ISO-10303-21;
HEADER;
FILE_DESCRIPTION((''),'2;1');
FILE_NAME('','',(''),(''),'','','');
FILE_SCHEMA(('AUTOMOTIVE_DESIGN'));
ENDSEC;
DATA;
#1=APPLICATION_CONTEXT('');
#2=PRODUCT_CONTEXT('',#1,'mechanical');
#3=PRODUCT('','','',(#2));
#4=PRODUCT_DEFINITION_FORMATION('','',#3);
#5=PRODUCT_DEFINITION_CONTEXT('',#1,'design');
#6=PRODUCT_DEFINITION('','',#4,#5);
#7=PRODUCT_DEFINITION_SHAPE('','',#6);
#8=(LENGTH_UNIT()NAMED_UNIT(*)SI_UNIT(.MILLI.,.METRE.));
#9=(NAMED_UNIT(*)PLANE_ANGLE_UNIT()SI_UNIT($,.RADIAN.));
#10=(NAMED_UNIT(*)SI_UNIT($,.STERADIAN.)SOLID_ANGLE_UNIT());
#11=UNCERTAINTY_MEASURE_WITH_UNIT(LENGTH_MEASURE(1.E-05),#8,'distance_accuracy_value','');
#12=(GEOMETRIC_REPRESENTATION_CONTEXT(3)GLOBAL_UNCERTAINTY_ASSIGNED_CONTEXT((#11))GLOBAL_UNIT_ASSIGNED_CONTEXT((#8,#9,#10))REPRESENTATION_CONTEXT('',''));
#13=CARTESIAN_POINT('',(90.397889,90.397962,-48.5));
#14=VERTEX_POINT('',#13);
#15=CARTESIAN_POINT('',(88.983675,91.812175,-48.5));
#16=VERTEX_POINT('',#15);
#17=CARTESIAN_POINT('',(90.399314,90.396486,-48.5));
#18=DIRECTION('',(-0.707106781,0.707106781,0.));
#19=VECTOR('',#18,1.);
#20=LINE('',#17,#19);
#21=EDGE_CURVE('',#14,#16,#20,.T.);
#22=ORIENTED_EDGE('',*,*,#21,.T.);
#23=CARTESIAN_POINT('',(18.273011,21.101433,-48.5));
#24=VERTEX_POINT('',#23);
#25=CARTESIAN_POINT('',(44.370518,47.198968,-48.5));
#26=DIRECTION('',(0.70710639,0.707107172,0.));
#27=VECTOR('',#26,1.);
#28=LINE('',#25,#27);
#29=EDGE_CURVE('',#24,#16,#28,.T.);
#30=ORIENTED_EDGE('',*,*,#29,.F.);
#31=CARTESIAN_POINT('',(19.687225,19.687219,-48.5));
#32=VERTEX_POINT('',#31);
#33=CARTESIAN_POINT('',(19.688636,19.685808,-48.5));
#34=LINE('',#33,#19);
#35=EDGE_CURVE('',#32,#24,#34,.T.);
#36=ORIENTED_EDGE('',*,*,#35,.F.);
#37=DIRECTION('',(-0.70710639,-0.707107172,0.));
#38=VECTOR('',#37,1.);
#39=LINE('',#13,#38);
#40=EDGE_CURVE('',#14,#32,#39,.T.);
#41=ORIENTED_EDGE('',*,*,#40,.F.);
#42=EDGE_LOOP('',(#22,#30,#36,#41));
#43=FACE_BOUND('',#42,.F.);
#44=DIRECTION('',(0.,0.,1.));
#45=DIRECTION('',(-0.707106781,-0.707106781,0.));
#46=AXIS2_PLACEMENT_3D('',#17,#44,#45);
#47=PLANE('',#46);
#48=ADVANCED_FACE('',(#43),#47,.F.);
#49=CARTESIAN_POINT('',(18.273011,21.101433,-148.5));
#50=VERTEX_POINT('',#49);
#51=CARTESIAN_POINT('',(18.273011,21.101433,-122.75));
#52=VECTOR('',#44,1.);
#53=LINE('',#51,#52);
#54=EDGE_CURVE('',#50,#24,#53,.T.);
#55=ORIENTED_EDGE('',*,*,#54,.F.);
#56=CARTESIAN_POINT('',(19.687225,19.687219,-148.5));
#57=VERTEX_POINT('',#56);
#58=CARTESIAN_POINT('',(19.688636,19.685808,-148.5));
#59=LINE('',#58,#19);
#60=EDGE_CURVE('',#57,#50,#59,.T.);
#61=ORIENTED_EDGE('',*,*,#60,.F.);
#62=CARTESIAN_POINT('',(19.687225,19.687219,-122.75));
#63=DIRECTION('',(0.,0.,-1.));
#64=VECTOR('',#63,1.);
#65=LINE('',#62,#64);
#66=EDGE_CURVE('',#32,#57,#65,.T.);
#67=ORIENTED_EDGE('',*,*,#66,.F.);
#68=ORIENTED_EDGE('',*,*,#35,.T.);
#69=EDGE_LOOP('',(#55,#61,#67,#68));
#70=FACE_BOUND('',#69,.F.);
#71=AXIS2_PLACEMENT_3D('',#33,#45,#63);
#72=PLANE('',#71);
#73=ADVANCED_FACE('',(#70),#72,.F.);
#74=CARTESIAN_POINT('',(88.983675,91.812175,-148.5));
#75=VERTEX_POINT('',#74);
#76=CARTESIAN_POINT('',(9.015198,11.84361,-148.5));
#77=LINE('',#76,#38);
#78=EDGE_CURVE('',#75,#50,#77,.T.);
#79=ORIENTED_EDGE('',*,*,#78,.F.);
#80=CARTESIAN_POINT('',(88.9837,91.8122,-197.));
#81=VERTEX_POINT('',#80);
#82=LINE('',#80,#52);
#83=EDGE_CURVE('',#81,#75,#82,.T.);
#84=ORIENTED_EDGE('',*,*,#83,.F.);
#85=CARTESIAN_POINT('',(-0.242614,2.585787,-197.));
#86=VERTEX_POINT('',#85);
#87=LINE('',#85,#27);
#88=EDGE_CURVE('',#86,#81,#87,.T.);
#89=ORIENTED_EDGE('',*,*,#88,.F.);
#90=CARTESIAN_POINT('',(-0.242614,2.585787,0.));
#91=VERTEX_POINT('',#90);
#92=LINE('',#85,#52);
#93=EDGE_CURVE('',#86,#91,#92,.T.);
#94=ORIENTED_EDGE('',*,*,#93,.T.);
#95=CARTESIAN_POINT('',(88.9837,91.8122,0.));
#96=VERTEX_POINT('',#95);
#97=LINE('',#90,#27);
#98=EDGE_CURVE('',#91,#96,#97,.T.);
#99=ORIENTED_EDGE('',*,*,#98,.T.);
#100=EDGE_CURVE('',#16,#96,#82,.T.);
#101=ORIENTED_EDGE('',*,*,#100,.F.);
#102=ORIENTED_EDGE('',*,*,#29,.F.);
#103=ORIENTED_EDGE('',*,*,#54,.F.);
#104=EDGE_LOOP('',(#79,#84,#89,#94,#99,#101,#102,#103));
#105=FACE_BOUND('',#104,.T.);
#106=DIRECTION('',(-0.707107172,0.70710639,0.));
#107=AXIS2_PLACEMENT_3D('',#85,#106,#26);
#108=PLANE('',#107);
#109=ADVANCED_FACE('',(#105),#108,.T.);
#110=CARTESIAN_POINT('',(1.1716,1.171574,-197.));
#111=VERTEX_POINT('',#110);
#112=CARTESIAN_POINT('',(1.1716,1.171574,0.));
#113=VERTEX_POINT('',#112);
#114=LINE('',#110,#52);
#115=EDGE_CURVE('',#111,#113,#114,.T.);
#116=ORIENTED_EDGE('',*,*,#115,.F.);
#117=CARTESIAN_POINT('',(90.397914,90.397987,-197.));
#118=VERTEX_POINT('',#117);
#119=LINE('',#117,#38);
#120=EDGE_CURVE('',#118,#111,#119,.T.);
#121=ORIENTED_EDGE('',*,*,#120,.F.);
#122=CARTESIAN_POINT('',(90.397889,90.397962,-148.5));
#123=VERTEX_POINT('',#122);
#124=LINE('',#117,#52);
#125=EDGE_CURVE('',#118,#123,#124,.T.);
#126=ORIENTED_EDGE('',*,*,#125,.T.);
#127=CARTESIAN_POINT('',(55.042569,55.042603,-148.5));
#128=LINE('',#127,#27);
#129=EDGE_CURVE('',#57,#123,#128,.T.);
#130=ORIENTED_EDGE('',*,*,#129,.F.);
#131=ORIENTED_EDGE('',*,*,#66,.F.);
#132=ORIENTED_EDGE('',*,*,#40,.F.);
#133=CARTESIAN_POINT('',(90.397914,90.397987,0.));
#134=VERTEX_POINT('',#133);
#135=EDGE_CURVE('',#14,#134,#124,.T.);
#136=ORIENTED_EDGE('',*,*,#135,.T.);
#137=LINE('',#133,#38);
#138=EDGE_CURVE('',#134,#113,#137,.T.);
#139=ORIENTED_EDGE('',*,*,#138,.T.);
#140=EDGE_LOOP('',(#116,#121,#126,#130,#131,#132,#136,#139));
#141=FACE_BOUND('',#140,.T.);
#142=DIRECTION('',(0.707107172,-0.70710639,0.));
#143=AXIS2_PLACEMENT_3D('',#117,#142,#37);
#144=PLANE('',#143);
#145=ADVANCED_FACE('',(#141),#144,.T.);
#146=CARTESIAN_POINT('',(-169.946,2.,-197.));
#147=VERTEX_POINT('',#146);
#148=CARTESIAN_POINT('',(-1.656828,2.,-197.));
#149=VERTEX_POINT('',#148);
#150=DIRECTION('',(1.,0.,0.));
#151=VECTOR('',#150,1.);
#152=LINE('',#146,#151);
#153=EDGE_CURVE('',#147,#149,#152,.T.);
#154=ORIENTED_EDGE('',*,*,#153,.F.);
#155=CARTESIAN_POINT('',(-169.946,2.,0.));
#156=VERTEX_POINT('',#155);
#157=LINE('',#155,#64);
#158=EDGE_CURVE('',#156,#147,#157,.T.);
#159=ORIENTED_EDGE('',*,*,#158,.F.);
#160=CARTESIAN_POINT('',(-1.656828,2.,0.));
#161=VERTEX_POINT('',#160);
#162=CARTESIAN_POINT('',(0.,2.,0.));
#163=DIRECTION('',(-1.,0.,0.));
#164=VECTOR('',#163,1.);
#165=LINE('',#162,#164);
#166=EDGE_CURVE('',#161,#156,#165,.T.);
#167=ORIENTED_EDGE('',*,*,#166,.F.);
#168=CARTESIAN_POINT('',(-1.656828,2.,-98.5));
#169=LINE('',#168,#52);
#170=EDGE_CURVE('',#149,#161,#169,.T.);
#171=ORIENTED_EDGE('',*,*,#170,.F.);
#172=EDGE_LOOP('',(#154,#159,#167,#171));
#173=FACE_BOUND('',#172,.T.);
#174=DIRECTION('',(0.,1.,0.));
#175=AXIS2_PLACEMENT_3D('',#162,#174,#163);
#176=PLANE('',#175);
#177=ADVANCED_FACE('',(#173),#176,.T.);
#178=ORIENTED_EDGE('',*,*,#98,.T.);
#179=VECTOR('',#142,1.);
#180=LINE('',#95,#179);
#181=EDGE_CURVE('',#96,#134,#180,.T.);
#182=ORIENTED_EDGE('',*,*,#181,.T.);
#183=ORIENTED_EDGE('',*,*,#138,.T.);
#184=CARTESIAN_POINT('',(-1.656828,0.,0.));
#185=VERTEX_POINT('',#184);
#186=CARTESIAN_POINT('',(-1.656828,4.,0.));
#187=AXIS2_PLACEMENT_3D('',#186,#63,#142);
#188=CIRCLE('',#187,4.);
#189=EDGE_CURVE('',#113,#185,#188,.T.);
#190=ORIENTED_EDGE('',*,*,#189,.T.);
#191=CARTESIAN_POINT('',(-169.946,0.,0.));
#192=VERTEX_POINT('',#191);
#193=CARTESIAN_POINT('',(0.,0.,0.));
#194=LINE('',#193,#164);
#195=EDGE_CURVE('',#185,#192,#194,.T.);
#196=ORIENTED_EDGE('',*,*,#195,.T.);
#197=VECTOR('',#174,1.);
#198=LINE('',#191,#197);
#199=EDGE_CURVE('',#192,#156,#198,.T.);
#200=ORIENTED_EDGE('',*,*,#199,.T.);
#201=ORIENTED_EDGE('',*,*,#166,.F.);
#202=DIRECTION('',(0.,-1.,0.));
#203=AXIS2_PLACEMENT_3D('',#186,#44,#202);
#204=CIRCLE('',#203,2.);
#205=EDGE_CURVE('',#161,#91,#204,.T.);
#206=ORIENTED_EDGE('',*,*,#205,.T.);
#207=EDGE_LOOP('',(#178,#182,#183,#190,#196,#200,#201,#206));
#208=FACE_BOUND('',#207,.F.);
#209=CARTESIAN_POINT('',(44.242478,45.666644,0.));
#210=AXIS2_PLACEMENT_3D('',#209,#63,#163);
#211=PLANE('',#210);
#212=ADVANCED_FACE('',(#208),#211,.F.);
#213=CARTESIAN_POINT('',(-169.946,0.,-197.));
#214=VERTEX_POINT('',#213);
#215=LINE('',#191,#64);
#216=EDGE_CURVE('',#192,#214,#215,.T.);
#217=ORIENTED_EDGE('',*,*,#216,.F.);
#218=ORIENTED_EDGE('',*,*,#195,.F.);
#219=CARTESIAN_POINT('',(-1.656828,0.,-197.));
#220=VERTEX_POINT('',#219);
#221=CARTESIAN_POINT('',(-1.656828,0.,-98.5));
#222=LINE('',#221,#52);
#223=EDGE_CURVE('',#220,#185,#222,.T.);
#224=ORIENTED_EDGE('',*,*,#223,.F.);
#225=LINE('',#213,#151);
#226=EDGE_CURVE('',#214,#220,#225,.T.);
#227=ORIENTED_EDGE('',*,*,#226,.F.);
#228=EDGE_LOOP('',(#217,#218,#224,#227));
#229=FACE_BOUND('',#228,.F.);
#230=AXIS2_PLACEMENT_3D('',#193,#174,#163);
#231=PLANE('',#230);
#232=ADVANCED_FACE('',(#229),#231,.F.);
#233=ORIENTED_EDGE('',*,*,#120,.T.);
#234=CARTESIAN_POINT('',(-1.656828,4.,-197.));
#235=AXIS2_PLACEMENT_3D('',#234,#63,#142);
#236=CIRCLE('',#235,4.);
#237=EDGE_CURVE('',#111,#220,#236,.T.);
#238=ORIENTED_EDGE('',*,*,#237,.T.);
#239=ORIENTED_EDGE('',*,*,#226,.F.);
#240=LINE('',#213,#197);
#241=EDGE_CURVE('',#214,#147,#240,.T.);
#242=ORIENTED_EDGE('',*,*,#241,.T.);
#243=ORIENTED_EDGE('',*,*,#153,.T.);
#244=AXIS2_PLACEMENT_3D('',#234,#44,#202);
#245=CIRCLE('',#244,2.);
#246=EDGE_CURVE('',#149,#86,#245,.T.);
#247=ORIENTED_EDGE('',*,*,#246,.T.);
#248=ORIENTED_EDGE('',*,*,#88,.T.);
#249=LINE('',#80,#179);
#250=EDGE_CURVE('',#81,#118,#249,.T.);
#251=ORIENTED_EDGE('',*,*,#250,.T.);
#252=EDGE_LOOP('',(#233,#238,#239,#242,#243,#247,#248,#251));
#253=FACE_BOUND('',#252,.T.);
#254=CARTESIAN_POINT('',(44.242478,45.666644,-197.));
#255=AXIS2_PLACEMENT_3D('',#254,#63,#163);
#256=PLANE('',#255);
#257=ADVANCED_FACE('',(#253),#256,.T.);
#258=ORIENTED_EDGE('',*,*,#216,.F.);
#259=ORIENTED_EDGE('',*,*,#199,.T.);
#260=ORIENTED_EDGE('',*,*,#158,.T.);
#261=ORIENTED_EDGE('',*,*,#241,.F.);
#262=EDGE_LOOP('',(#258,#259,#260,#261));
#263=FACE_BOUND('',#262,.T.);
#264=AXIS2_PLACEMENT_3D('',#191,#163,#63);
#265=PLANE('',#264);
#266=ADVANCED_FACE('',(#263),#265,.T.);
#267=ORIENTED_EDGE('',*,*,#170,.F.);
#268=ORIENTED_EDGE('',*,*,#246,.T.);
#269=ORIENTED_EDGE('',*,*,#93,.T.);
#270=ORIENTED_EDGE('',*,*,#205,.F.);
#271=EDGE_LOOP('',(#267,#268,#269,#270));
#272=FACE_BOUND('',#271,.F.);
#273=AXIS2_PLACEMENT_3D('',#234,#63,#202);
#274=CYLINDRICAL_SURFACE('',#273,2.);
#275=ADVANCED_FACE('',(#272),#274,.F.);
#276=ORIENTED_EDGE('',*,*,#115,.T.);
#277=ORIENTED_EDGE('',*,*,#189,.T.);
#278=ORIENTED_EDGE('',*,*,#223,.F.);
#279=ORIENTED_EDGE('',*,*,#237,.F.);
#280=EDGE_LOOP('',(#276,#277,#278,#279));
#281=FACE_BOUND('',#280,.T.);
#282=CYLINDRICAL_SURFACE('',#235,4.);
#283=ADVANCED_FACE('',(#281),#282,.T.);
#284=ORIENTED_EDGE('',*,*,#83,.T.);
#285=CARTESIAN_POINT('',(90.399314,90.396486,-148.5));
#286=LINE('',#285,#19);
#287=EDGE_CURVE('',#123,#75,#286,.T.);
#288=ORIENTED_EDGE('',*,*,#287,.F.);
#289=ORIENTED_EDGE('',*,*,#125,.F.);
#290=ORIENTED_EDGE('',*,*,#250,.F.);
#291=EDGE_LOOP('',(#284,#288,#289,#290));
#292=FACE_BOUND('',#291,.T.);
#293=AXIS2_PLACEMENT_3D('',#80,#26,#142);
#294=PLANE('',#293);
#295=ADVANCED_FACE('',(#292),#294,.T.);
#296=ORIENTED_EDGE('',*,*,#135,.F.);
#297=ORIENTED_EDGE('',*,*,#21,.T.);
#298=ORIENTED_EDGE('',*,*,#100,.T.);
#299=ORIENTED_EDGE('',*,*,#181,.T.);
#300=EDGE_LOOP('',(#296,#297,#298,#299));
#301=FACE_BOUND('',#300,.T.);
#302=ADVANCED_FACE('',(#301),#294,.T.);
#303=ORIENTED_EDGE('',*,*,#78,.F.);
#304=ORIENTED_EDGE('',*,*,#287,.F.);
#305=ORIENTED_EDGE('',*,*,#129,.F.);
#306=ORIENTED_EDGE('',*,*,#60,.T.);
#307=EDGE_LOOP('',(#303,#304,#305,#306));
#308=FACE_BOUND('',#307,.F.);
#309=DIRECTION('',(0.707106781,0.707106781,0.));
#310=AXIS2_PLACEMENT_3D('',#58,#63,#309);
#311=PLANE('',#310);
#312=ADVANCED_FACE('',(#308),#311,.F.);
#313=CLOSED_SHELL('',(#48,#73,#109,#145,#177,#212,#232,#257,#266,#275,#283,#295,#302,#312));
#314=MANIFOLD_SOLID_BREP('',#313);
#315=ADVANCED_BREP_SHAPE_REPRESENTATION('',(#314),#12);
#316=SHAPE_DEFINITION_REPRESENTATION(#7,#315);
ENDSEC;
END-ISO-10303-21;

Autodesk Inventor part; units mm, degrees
ref_plane "YZ Plane" through (0, 0, 0) normal (1, 0, 0) x (0, 1, 0)
ref_plane "XZ Plane" through (0, 0, 0) normal (0, 1, 0) x (-1, 0, 0)
ref_plane "XY Plane" through (0, 0, 0) normal (0, 0, 1) x (1, 0, 0)
sketch "Sketch1" plane through (0, 0, 0) normal (0, 1, 0) x (-1, 0, 0)
  line L0 (0, 0) -> (169.946, 0)
  line L1 (169.946, 0) -> (169.946, -197)
  line L2 (169.946, -197) -> (0, -197)
  line L3 (0, -197) -> (0, 0)
  dimension "d0" = 197
  dimension "d1" = 169.946
extrude "Plate1" add sketch "Sketch1" along normal blind 2
sketch "Sketch2" plane through (-1.4142, 1.4142, -197) normal (0.7071068, -0.7071068, 0) x (0.7071068, 0.7071068, 0)
  line L0 (0, 197) -> (0, 0)
  line L1 (0, 0) -> (127.842, 0)
  line L2 (127.842, 0) -> (127.842, 197)
  line L3 (127.842, 197) -> (0, 197)
edge flange "Flange1" height 127.842 angle 45 thickness 2 bend radius 2 thickness toward (0.7071068, -0.7071068, 0) relief tear relief width 2 relief depth 1 edges at (0, 2, -98.5) wall of the first edge with corners at (-1.4142, 1.4142, 0) (-1.4142, 1.4142, -197) (88.9837, 91.8122, -197) (88.9837, 91.8122, 0)
bend "Bend1"
corner "Corner1"
sketch "Sketch3" plane through (90.3979, 90.3979, 0) normal (0.7071068, -0.7071068, 0) x (-0.7071068, -0.7071068, 0)
  line L0 (0, 48.5) -> (100, 48.5)
  line L1 (100, 48.5) -> (100, 148.5)
  line L2 (100, 148.5) -> (0, 148.5)
  line L3 (0, 148.5) -> (0, 48.5)
  line L4 (0, 197) -> (126.1851, 197) projected
  line L5 (0, 0) -> (0, 197) projected
  point P0 (127.842, 0)
  point P1 (63.0926, 197)
  dimension "d13" = 100
  dimension "d14" = 100
  dimension "d15" = 48.5
extrude "Cut1" cut sketch "Sketch3" against normal blind 2
equation "\"d14\" = d13"
equation "\"d16\" = Thickness"
equation "\"d2\" = Thickness"
equation "\"d3\" = BendReliefWidth"
equation "\"d4\" = BendReliefDepth"
equation "\"d5\" = MinimumRemnant"
equation "\"d6\" = TransitionRadius"
equation "\"d9\" = BendRadius"
equation "\"d10\" = CornerReliefSize"
equation "\"d11\" = GapSize"
equation "\"d12\" = JacobiRadiusSize"
equation "\"BendRadius\" = Thickness"
equation "\"BendReliefWidth\" = Thickness"
equation "\"BendReliefDepth\" = 0.5 * Thickness"
equation "\"CornerReliefSize\" = 4 * Thickness"
equation "\"MinimumRemnant\" = 2 * Thickness"
equation "\"TransitionRadius\" = BendRadius"
equation "\"JacobiRadiusSize\" = BendRadius"
equation "\"GapSize\" = Thickness"
equation "\"Thickness\" = 2"
properties part number "LzC-FrontPLateRS3" material "Steel"
